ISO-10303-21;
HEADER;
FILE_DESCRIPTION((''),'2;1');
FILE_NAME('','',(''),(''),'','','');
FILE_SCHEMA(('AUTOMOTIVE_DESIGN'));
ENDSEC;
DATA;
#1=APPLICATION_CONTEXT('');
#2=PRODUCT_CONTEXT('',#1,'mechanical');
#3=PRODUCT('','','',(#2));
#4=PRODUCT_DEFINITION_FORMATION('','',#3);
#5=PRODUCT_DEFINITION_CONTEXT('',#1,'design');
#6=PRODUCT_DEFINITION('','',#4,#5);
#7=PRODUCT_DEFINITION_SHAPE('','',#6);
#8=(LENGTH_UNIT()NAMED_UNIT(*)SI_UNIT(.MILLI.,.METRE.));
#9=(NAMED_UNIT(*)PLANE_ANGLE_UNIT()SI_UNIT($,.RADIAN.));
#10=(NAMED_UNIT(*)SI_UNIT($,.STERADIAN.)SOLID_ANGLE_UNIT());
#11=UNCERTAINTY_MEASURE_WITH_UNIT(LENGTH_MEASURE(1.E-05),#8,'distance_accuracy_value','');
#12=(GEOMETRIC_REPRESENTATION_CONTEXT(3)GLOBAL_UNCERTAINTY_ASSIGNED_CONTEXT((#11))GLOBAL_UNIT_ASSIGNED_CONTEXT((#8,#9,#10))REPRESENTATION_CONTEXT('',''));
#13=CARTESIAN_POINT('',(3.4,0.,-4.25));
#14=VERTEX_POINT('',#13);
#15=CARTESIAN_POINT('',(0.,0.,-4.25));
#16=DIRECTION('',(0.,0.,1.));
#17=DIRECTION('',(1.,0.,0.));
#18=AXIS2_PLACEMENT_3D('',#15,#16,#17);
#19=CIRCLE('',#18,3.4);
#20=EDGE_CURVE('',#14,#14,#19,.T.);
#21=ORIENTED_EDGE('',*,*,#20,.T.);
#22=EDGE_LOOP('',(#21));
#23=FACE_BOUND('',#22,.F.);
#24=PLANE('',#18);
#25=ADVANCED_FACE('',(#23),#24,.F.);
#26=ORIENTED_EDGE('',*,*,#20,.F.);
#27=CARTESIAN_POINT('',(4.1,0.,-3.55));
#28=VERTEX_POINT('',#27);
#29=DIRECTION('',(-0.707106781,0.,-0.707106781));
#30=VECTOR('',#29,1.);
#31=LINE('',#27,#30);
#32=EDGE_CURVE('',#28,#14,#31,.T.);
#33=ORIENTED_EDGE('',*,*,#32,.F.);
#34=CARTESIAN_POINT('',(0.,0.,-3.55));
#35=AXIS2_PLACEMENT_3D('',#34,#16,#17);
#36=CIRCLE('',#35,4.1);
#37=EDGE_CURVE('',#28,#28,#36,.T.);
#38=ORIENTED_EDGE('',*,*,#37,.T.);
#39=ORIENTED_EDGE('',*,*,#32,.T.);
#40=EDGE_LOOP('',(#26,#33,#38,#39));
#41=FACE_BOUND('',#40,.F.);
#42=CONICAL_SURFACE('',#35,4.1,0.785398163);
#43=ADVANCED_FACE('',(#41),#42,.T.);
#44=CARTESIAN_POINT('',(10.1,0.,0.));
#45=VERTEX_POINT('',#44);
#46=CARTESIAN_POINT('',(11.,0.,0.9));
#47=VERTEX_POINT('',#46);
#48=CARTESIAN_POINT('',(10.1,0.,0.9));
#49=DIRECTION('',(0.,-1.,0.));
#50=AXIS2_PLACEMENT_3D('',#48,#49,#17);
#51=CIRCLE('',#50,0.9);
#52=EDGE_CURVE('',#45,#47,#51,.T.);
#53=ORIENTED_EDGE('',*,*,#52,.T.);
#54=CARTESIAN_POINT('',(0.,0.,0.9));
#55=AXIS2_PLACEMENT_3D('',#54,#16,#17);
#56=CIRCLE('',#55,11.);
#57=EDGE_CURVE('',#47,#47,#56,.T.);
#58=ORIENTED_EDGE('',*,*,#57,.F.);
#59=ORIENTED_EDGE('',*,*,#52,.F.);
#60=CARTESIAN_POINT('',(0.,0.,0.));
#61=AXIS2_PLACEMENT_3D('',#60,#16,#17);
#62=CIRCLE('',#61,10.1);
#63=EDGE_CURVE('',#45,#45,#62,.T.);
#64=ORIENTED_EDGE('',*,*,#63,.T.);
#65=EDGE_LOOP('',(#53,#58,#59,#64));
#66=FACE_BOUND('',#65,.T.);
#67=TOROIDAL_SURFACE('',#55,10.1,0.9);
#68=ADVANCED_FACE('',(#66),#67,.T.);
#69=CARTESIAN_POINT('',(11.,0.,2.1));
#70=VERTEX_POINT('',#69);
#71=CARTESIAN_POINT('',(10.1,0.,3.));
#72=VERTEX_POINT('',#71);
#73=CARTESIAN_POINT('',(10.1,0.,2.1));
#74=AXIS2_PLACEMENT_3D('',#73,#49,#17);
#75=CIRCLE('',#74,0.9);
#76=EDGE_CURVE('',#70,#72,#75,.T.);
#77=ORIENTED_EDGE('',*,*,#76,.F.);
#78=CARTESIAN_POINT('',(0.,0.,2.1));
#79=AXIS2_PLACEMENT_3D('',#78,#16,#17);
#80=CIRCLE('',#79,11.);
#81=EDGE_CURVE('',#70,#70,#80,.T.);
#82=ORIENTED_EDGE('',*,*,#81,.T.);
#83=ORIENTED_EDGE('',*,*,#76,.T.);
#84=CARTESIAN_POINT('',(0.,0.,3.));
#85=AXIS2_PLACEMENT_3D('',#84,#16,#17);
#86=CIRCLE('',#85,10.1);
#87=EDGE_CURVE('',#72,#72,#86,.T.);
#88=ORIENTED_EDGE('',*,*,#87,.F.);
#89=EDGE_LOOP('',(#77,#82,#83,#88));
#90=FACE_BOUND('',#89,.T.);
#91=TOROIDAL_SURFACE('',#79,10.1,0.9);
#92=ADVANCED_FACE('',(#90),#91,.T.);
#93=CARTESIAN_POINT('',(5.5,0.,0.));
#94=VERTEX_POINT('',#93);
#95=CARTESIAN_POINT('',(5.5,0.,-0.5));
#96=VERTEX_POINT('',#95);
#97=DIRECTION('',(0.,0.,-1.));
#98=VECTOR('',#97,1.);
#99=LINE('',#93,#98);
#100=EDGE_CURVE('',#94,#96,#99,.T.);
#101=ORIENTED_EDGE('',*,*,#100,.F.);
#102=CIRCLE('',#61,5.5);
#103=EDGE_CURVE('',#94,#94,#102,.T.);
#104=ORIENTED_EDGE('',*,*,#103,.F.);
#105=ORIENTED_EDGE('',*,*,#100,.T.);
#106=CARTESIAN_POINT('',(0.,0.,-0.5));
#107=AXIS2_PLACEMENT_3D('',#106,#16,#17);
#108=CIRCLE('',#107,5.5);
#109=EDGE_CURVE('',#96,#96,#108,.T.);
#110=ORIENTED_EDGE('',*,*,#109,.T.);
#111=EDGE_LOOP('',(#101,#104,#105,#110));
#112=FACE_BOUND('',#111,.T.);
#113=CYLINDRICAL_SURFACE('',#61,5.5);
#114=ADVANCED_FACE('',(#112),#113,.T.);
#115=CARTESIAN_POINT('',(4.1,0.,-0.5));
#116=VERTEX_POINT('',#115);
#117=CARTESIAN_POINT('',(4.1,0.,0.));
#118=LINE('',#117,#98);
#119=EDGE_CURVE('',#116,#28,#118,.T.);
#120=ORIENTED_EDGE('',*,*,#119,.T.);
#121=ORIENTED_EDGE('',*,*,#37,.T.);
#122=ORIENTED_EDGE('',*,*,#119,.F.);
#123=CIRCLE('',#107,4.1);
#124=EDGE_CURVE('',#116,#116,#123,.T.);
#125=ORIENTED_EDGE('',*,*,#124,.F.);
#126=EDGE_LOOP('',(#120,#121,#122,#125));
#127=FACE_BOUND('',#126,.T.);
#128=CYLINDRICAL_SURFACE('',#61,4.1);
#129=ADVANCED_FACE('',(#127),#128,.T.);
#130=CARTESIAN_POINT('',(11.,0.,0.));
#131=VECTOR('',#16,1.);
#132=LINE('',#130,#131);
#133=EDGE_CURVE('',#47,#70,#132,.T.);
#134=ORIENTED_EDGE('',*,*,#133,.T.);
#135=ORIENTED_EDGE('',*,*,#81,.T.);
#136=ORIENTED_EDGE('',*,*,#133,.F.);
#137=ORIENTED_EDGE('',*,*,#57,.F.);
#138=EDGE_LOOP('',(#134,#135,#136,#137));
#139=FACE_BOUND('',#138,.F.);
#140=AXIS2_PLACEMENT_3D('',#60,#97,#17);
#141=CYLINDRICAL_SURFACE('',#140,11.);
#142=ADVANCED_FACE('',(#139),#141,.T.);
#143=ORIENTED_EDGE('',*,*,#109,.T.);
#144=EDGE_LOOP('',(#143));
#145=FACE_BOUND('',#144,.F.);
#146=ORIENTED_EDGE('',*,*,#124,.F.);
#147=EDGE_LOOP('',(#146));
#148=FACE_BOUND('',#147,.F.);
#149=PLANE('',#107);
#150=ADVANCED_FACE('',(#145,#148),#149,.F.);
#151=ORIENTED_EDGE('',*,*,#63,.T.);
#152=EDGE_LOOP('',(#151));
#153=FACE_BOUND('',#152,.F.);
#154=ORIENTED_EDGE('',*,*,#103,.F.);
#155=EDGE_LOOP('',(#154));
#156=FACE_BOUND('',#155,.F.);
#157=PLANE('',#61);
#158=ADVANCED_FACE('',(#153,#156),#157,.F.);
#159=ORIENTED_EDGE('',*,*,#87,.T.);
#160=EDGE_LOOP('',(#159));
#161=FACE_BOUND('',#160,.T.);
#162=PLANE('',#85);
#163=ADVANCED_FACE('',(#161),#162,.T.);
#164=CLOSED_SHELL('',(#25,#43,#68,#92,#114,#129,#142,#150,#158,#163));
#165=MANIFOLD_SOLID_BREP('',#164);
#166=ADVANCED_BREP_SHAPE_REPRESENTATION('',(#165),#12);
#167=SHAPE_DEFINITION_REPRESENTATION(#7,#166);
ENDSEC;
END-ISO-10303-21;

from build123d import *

# Parameters (mm, degrees)
F0_R     = 11
F0_R_2   = 5.5
F0_R_3   = 4.1
F1_DEPTH = 3
F2_DEPTH = 4.25
F3_SIZE  = 0.7
F4_R     = 0.9
F5_DEPTH = 0.5


with BuildPart() as f1:
    # F0 (on Top) → F1 (new body)
    with BuildSketch(Plane.XY):
        Circle(F0_R)
        Circle(F0_R_2, mode=Mode.SUBTRACT)
        Circle(F0_R_2)
        Circle(F0_R_3, mode=Mode.SUBTRACT)
        Circle(F0_R_3)
    extrude(amount=F1_DEPTH)

    # F0 (on Top) → F2 (join)
    with BuildSketch(Plane.XY):
        Circle(F0_R_3)
    extrude(amount=-F2_DEPTH)

    # F3
    f3_edges = [f1.edges().sort_by_distance(p)[0] for p in [
        (-4.1, 0, -4.25),
    ]]
    chamfer(f3_edges, length=F3_SIZE)

    # F4
    f4_edges = [f1.edges().sort_by_distance(p)[0] for p in [
        (11, 0, 1.5),
        (-11, 0, 0),
        (-11, 0, 3),
    ]]
    fillet(f4_edges, radius=F4_R)

    # F0 (on Top) → F5 (join)
    with BuildSketch(Plane.XY):
        Circle(F0_R_2)
        Circle(F0_R_3, mode=Mode.SUBTRACT)
    extrude(amount=-F5_DEPTH)


solid = f1.part
